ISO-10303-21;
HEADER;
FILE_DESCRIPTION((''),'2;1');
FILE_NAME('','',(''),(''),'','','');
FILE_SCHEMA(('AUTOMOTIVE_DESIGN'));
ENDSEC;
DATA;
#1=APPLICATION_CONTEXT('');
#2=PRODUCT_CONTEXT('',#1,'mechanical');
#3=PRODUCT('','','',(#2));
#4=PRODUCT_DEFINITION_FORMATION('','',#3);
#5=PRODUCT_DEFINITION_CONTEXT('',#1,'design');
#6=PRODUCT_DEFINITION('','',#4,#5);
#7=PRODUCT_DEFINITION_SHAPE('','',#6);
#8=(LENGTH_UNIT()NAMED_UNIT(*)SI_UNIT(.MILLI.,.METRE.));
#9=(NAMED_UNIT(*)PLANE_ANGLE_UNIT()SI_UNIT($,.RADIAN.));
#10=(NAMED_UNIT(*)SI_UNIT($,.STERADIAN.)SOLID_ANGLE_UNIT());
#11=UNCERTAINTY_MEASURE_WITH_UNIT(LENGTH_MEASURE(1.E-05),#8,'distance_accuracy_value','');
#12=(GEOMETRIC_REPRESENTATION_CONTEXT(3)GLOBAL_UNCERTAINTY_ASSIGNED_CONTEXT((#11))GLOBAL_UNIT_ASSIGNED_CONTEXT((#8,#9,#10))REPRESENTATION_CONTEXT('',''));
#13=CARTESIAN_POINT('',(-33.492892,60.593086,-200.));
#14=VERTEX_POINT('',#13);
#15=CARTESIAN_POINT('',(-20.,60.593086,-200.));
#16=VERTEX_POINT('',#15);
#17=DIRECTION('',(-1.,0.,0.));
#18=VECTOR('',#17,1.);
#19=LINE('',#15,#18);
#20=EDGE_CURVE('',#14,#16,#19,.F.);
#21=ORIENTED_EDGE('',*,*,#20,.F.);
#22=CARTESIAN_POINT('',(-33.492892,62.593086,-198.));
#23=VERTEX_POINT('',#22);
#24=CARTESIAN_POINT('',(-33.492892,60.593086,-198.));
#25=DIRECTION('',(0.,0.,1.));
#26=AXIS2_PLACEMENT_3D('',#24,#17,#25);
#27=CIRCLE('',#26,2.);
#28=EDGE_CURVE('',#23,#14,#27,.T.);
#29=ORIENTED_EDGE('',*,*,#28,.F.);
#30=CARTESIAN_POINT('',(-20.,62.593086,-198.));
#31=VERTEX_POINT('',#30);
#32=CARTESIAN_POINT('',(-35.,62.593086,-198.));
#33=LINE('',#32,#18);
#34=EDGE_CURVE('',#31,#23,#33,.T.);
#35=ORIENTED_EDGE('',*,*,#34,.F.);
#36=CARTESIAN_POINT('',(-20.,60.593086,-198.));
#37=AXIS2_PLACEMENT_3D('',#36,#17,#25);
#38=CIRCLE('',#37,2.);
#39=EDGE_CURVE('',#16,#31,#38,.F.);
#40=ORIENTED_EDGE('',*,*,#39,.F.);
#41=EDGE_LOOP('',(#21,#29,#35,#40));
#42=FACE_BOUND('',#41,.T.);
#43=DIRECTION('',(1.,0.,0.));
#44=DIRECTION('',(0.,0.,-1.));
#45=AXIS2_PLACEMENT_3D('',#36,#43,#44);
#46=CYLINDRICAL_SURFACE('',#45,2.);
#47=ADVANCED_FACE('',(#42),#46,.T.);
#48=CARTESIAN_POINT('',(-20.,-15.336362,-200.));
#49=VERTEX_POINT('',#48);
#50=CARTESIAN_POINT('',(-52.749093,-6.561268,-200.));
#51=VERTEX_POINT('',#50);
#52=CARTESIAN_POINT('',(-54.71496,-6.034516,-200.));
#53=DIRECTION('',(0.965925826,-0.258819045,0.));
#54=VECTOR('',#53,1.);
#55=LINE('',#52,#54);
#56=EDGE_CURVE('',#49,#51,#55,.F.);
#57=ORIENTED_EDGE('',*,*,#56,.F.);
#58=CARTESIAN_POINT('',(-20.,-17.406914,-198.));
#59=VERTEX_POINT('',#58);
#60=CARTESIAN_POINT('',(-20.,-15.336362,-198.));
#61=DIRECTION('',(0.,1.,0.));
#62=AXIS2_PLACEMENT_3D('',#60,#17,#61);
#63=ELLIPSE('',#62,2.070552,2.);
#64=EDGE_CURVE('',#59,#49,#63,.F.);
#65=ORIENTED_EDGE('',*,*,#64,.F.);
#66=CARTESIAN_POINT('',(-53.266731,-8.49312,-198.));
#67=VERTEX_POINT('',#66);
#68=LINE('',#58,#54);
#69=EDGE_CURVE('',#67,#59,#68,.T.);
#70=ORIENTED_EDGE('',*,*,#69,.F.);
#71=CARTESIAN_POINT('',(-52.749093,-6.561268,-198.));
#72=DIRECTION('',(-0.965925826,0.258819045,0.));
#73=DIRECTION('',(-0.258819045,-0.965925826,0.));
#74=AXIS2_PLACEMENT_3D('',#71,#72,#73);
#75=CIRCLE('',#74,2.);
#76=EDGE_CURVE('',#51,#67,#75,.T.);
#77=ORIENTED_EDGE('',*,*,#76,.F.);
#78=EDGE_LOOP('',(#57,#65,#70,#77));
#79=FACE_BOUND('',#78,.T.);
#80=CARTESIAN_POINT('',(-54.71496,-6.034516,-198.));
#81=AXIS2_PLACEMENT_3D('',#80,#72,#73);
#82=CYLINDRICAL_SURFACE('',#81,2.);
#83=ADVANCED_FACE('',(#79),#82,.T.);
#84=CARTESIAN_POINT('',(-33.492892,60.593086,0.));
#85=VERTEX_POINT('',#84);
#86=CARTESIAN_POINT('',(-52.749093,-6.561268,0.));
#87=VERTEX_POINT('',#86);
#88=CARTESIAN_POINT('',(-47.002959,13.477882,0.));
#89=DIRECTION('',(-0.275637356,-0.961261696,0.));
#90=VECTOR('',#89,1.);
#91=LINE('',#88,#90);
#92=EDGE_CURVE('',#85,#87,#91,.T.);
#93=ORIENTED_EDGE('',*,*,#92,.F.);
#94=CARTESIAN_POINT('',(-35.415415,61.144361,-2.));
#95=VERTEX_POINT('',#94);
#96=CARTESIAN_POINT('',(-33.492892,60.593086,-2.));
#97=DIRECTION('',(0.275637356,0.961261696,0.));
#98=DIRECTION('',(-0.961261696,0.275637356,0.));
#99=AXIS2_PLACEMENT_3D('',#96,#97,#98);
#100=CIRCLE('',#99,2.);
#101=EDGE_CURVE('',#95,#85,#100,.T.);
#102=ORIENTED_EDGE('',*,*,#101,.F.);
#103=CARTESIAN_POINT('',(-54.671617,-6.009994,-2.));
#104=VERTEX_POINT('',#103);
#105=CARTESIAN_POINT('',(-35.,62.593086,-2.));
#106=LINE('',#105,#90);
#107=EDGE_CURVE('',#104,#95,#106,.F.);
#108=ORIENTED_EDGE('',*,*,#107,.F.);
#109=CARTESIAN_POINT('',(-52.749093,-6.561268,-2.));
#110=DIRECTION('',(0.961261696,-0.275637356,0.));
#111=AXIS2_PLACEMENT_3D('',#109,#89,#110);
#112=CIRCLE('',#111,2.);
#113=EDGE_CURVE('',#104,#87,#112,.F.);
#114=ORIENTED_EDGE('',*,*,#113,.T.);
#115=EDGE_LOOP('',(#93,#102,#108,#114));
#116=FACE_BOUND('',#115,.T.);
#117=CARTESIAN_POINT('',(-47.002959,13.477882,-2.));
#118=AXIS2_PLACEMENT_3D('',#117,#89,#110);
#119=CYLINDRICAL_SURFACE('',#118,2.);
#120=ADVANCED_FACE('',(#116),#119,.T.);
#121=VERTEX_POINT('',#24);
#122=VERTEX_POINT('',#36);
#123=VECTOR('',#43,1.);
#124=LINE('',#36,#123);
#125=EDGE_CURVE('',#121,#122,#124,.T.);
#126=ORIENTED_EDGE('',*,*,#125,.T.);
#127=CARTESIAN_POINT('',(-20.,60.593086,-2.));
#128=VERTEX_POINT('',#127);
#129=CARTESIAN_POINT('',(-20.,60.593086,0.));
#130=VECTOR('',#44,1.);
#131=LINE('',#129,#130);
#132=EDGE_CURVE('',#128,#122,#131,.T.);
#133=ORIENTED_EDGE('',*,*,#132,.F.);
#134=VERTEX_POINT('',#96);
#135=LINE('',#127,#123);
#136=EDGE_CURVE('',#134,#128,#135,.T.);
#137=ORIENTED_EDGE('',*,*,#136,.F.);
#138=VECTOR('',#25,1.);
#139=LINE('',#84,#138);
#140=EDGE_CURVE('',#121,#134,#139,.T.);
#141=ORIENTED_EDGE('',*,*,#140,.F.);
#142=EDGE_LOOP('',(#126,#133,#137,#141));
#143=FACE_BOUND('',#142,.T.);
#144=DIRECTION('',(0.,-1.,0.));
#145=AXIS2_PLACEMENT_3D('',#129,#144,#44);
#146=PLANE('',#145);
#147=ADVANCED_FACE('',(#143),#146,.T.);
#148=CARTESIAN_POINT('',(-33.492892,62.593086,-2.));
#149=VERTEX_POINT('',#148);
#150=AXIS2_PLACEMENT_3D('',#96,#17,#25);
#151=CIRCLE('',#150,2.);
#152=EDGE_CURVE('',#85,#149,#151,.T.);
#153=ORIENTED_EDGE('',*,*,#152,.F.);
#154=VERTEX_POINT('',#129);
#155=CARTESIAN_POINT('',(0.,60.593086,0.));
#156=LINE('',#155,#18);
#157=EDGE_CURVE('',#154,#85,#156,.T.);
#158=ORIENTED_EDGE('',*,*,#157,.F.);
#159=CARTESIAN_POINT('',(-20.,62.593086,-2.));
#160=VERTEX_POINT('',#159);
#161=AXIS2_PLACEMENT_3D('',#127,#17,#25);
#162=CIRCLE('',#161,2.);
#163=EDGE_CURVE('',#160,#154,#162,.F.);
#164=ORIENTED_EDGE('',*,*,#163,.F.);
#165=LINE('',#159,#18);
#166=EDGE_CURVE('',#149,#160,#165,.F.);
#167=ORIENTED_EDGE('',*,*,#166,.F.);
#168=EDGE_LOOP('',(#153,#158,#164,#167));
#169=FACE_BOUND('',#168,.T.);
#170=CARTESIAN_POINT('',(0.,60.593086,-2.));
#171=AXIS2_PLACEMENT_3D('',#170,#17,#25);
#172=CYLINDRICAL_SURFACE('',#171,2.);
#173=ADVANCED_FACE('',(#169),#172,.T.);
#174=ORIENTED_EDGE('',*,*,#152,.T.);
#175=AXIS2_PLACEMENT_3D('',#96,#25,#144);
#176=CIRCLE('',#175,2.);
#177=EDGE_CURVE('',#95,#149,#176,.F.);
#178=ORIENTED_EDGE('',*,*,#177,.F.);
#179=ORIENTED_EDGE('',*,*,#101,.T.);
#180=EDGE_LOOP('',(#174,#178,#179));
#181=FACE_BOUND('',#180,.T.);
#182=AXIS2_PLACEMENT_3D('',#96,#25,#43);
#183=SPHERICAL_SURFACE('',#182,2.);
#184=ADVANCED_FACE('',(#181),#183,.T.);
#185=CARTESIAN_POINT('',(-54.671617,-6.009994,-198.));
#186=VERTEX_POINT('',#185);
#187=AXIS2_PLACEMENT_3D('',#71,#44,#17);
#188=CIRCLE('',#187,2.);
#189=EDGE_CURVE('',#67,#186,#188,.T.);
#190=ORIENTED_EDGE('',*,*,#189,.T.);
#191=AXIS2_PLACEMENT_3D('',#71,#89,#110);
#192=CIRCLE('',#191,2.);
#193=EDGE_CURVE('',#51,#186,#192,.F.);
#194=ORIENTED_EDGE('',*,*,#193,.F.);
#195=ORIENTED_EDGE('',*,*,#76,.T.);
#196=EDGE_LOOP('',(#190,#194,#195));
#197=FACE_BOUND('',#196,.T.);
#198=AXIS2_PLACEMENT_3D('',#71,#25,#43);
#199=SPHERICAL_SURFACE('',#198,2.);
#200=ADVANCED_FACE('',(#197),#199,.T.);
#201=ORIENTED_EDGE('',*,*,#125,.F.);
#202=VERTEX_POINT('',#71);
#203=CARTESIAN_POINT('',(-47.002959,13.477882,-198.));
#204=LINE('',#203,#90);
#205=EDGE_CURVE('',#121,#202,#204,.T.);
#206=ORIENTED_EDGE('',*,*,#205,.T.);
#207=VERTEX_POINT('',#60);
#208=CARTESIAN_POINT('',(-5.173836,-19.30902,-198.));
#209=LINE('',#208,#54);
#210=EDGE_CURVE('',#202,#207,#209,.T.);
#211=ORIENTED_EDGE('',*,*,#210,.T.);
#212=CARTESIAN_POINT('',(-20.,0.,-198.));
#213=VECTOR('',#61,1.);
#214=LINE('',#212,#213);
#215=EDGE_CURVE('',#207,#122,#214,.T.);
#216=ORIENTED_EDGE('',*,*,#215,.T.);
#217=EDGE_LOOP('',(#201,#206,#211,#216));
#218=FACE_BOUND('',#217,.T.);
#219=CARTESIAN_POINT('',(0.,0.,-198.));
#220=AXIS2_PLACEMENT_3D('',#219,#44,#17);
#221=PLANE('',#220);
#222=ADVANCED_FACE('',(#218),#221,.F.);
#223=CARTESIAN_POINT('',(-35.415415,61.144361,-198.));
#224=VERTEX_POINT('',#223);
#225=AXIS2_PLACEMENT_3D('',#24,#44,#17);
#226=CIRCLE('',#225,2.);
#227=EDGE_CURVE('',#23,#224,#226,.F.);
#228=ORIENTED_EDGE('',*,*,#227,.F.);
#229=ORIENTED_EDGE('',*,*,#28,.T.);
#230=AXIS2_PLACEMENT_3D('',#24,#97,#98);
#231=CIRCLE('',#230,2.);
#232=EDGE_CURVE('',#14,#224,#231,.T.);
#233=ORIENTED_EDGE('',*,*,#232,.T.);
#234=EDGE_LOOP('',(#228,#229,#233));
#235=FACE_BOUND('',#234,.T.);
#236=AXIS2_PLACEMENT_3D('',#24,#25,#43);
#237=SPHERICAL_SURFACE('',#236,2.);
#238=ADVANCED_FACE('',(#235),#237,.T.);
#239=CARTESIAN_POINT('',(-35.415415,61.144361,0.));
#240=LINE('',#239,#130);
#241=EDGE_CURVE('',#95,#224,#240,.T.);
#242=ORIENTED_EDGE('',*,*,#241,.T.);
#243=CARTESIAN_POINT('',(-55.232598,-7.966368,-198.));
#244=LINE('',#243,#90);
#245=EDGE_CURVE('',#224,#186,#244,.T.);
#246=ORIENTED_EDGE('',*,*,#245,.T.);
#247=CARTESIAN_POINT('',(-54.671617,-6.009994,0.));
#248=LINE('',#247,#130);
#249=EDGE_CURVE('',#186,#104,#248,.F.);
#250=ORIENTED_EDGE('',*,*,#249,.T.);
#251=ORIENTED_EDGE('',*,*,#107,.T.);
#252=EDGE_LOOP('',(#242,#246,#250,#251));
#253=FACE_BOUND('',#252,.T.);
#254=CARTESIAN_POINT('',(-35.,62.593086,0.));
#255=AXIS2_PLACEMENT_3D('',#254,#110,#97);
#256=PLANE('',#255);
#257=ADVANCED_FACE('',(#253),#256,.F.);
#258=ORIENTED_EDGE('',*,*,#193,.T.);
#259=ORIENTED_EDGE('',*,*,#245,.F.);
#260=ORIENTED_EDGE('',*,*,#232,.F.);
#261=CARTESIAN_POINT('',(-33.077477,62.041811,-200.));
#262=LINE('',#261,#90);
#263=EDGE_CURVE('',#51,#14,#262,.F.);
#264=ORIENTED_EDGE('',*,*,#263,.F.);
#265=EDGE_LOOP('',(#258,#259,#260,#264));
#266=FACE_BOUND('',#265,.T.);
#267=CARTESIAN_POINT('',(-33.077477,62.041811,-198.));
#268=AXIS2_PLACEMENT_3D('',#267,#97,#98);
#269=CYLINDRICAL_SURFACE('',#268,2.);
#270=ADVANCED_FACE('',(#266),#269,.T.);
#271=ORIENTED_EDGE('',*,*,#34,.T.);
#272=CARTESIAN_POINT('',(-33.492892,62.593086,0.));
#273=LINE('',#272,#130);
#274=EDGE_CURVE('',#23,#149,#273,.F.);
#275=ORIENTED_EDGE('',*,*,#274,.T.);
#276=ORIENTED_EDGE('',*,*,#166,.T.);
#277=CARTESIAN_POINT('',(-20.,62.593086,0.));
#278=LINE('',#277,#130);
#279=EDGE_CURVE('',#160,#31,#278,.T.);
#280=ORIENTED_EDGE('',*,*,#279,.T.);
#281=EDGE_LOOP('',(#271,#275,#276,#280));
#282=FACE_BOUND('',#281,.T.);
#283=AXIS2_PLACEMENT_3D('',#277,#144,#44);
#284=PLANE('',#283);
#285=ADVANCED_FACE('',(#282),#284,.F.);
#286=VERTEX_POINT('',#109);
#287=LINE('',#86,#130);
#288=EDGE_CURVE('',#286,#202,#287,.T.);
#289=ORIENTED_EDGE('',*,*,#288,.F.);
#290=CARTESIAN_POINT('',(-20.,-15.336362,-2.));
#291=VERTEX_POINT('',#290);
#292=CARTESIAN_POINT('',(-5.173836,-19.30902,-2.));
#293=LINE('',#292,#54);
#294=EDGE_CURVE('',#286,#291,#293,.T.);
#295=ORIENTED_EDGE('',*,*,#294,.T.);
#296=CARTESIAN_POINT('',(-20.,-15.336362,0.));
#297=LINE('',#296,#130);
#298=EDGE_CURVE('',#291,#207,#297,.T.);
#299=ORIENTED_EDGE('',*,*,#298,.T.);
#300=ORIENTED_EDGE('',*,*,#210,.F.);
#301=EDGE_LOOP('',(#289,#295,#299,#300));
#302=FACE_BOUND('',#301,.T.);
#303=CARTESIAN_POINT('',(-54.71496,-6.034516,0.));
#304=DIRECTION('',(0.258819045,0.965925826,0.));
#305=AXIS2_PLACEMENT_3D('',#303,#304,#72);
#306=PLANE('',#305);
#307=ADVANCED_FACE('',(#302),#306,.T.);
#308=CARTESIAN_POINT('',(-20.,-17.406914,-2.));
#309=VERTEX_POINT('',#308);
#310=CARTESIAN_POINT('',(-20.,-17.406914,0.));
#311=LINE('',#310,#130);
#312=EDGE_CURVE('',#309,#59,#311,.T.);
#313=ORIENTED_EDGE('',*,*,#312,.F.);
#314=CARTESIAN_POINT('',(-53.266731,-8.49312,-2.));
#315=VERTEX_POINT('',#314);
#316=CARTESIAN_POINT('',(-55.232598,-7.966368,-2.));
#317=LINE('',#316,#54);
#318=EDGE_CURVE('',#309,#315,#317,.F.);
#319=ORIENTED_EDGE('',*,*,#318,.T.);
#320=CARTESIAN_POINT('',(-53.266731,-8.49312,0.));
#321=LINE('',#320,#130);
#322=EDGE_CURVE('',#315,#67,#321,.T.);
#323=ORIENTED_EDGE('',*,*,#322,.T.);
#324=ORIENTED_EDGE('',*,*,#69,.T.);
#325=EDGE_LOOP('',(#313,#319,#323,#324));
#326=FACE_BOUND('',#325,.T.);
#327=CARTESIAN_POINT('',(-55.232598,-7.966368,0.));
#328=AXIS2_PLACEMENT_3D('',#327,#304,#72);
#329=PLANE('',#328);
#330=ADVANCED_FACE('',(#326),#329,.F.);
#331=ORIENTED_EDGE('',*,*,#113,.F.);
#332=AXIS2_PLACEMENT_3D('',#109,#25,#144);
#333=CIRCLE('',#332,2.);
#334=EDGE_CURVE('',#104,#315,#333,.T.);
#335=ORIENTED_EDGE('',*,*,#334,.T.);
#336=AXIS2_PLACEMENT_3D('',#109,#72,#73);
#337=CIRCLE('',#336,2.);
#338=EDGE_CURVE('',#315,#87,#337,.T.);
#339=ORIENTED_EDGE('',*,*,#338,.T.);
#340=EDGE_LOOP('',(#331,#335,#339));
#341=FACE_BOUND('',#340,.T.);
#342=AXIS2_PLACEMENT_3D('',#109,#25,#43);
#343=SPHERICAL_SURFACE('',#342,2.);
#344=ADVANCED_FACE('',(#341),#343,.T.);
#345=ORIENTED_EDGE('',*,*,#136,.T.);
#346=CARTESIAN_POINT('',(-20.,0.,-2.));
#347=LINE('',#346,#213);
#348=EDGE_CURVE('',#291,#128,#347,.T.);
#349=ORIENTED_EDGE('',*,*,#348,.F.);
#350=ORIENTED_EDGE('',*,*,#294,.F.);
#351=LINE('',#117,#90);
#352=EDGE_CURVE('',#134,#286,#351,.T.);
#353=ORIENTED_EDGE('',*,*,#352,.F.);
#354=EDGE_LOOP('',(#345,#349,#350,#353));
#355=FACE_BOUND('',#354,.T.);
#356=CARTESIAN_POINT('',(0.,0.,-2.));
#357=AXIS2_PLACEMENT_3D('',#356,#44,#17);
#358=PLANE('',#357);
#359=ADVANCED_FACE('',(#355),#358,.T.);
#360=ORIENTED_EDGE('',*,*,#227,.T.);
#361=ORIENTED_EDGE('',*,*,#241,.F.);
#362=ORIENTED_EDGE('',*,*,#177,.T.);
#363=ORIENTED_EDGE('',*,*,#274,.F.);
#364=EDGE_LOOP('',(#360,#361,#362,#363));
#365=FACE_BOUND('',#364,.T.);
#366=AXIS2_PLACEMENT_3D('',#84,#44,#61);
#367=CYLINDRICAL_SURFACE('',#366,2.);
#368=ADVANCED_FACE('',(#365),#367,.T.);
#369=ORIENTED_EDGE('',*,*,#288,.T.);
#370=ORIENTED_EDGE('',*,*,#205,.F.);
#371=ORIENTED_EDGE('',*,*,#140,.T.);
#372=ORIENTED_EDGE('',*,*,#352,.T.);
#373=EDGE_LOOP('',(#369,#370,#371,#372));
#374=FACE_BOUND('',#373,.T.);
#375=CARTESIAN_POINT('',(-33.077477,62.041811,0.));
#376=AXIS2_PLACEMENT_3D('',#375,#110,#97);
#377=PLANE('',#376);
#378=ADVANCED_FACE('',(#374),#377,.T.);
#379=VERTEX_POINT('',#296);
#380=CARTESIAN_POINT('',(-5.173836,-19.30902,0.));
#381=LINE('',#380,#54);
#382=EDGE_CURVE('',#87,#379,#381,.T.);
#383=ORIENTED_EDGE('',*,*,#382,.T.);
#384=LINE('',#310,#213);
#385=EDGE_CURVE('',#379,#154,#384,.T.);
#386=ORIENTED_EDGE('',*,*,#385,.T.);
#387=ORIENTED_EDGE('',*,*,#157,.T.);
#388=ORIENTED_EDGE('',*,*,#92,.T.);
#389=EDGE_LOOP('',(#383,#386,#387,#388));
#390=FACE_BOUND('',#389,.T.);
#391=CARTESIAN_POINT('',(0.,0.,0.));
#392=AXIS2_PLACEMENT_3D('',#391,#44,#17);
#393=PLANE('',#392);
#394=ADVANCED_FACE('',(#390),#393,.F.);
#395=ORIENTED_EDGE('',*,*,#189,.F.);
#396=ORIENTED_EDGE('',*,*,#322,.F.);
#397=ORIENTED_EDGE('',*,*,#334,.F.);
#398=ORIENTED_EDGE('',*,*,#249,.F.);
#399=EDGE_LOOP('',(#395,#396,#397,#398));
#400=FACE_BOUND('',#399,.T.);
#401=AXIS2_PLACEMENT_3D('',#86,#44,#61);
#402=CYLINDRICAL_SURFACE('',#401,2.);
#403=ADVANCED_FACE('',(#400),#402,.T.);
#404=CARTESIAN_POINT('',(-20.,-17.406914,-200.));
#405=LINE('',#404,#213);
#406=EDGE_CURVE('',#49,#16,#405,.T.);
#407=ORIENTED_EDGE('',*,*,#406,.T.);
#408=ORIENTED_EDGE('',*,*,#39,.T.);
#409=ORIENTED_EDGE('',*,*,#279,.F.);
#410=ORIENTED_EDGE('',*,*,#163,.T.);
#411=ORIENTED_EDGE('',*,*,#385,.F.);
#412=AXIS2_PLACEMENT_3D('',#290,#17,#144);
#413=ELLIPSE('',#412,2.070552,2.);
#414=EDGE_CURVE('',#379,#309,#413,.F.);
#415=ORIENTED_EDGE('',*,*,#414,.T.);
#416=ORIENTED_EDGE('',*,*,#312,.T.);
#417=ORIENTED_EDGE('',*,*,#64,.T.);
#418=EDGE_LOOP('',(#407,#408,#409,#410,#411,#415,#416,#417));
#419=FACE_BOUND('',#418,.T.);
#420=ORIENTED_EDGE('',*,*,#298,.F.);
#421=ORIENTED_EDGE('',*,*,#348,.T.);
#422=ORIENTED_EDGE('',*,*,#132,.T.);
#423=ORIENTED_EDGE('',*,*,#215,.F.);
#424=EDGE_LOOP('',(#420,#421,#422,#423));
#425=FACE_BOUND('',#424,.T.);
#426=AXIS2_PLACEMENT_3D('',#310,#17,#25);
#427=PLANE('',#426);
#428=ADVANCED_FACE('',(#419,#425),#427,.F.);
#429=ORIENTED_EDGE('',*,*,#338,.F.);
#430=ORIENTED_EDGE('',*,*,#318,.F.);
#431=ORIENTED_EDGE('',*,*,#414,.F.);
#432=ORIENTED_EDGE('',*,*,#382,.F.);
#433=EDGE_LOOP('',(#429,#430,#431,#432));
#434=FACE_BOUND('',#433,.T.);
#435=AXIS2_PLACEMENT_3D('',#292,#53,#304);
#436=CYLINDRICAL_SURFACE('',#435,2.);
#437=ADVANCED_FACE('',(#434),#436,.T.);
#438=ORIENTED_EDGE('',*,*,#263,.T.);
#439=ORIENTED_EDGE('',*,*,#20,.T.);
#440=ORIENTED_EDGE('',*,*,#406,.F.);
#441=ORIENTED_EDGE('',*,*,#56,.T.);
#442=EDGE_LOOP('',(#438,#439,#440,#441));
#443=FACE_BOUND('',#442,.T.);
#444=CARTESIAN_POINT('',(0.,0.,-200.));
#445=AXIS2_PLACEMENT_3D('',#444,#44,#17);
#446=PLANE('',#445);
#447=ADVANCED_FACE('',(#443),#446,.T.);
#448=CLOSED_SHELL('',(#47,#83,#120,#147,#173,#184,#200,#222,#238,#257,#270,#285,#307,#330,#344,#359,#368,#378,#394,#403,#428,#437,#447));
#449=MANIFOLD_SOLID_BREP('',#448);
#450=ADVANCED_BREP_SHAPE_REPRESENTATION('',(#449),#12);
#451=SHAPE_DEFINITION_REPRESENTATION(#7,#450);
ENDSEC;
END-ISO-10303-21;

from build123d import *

# Parameters (mm, degrees)
FILLET2_R    = 2
SHELL2_START = -198
SHELL2_DEPTH = 196


# Read off the part's stored shape, not the designer's step: Shell2
with BuildPart() as part:
    # Sweep2: sweep along a path in Sketch6
    with BuildLine(Plane(origin=(0, 62.593086106, 0), x_dir=(1, 0, 0), z_dir=(0, 1, 0))) as sweep2_path:
        Line((-20, 0), (-20, 200))
    # Sketch5 → Sweep2 (sweep)
    with BuildSketch(Plane.XY):
        Polygon((-20, -17.406913894), (-20, 62.593086106), (-35, 62.593086106), (-55.232597818, -7.966367761), align=None)
    sweep(path=sweep2_path.line)

    # Fillet2
    fillet2_edges = [part.edges().sort_by_distance(p)[0] for p in [
        (-27.5, 62.593086106, 0),
        (-45.116298909, 27.313359172, 0),
        (-55.232597818, -7.966367761, -100),
        (-37.616298909, -12.686640828, -200),
        (-27.5, 62.593086106, -200),
        (-35, 62.593086106, -100),
        (-45.116298909, 27.313359172, -200),
        (-37.616298909, -12.686640828, 0),
    ]]
    fillet(fillet2_edges, radius=FILLET2_R)

    # Shell2 outline → Shell2 (cut)
    with BuildSketch(Plane.XY.offset(SHELL2_START)):
        Polygon((-52.749093204, -6.561268456), (-20, -15.336361533), (-20, 60.593086106), (-33.4928919, 60.593086106), align=None)
    extrude(amount=SHELL2_DEPTH, mode=Mode.SUBTRACT)


solid = part.part
